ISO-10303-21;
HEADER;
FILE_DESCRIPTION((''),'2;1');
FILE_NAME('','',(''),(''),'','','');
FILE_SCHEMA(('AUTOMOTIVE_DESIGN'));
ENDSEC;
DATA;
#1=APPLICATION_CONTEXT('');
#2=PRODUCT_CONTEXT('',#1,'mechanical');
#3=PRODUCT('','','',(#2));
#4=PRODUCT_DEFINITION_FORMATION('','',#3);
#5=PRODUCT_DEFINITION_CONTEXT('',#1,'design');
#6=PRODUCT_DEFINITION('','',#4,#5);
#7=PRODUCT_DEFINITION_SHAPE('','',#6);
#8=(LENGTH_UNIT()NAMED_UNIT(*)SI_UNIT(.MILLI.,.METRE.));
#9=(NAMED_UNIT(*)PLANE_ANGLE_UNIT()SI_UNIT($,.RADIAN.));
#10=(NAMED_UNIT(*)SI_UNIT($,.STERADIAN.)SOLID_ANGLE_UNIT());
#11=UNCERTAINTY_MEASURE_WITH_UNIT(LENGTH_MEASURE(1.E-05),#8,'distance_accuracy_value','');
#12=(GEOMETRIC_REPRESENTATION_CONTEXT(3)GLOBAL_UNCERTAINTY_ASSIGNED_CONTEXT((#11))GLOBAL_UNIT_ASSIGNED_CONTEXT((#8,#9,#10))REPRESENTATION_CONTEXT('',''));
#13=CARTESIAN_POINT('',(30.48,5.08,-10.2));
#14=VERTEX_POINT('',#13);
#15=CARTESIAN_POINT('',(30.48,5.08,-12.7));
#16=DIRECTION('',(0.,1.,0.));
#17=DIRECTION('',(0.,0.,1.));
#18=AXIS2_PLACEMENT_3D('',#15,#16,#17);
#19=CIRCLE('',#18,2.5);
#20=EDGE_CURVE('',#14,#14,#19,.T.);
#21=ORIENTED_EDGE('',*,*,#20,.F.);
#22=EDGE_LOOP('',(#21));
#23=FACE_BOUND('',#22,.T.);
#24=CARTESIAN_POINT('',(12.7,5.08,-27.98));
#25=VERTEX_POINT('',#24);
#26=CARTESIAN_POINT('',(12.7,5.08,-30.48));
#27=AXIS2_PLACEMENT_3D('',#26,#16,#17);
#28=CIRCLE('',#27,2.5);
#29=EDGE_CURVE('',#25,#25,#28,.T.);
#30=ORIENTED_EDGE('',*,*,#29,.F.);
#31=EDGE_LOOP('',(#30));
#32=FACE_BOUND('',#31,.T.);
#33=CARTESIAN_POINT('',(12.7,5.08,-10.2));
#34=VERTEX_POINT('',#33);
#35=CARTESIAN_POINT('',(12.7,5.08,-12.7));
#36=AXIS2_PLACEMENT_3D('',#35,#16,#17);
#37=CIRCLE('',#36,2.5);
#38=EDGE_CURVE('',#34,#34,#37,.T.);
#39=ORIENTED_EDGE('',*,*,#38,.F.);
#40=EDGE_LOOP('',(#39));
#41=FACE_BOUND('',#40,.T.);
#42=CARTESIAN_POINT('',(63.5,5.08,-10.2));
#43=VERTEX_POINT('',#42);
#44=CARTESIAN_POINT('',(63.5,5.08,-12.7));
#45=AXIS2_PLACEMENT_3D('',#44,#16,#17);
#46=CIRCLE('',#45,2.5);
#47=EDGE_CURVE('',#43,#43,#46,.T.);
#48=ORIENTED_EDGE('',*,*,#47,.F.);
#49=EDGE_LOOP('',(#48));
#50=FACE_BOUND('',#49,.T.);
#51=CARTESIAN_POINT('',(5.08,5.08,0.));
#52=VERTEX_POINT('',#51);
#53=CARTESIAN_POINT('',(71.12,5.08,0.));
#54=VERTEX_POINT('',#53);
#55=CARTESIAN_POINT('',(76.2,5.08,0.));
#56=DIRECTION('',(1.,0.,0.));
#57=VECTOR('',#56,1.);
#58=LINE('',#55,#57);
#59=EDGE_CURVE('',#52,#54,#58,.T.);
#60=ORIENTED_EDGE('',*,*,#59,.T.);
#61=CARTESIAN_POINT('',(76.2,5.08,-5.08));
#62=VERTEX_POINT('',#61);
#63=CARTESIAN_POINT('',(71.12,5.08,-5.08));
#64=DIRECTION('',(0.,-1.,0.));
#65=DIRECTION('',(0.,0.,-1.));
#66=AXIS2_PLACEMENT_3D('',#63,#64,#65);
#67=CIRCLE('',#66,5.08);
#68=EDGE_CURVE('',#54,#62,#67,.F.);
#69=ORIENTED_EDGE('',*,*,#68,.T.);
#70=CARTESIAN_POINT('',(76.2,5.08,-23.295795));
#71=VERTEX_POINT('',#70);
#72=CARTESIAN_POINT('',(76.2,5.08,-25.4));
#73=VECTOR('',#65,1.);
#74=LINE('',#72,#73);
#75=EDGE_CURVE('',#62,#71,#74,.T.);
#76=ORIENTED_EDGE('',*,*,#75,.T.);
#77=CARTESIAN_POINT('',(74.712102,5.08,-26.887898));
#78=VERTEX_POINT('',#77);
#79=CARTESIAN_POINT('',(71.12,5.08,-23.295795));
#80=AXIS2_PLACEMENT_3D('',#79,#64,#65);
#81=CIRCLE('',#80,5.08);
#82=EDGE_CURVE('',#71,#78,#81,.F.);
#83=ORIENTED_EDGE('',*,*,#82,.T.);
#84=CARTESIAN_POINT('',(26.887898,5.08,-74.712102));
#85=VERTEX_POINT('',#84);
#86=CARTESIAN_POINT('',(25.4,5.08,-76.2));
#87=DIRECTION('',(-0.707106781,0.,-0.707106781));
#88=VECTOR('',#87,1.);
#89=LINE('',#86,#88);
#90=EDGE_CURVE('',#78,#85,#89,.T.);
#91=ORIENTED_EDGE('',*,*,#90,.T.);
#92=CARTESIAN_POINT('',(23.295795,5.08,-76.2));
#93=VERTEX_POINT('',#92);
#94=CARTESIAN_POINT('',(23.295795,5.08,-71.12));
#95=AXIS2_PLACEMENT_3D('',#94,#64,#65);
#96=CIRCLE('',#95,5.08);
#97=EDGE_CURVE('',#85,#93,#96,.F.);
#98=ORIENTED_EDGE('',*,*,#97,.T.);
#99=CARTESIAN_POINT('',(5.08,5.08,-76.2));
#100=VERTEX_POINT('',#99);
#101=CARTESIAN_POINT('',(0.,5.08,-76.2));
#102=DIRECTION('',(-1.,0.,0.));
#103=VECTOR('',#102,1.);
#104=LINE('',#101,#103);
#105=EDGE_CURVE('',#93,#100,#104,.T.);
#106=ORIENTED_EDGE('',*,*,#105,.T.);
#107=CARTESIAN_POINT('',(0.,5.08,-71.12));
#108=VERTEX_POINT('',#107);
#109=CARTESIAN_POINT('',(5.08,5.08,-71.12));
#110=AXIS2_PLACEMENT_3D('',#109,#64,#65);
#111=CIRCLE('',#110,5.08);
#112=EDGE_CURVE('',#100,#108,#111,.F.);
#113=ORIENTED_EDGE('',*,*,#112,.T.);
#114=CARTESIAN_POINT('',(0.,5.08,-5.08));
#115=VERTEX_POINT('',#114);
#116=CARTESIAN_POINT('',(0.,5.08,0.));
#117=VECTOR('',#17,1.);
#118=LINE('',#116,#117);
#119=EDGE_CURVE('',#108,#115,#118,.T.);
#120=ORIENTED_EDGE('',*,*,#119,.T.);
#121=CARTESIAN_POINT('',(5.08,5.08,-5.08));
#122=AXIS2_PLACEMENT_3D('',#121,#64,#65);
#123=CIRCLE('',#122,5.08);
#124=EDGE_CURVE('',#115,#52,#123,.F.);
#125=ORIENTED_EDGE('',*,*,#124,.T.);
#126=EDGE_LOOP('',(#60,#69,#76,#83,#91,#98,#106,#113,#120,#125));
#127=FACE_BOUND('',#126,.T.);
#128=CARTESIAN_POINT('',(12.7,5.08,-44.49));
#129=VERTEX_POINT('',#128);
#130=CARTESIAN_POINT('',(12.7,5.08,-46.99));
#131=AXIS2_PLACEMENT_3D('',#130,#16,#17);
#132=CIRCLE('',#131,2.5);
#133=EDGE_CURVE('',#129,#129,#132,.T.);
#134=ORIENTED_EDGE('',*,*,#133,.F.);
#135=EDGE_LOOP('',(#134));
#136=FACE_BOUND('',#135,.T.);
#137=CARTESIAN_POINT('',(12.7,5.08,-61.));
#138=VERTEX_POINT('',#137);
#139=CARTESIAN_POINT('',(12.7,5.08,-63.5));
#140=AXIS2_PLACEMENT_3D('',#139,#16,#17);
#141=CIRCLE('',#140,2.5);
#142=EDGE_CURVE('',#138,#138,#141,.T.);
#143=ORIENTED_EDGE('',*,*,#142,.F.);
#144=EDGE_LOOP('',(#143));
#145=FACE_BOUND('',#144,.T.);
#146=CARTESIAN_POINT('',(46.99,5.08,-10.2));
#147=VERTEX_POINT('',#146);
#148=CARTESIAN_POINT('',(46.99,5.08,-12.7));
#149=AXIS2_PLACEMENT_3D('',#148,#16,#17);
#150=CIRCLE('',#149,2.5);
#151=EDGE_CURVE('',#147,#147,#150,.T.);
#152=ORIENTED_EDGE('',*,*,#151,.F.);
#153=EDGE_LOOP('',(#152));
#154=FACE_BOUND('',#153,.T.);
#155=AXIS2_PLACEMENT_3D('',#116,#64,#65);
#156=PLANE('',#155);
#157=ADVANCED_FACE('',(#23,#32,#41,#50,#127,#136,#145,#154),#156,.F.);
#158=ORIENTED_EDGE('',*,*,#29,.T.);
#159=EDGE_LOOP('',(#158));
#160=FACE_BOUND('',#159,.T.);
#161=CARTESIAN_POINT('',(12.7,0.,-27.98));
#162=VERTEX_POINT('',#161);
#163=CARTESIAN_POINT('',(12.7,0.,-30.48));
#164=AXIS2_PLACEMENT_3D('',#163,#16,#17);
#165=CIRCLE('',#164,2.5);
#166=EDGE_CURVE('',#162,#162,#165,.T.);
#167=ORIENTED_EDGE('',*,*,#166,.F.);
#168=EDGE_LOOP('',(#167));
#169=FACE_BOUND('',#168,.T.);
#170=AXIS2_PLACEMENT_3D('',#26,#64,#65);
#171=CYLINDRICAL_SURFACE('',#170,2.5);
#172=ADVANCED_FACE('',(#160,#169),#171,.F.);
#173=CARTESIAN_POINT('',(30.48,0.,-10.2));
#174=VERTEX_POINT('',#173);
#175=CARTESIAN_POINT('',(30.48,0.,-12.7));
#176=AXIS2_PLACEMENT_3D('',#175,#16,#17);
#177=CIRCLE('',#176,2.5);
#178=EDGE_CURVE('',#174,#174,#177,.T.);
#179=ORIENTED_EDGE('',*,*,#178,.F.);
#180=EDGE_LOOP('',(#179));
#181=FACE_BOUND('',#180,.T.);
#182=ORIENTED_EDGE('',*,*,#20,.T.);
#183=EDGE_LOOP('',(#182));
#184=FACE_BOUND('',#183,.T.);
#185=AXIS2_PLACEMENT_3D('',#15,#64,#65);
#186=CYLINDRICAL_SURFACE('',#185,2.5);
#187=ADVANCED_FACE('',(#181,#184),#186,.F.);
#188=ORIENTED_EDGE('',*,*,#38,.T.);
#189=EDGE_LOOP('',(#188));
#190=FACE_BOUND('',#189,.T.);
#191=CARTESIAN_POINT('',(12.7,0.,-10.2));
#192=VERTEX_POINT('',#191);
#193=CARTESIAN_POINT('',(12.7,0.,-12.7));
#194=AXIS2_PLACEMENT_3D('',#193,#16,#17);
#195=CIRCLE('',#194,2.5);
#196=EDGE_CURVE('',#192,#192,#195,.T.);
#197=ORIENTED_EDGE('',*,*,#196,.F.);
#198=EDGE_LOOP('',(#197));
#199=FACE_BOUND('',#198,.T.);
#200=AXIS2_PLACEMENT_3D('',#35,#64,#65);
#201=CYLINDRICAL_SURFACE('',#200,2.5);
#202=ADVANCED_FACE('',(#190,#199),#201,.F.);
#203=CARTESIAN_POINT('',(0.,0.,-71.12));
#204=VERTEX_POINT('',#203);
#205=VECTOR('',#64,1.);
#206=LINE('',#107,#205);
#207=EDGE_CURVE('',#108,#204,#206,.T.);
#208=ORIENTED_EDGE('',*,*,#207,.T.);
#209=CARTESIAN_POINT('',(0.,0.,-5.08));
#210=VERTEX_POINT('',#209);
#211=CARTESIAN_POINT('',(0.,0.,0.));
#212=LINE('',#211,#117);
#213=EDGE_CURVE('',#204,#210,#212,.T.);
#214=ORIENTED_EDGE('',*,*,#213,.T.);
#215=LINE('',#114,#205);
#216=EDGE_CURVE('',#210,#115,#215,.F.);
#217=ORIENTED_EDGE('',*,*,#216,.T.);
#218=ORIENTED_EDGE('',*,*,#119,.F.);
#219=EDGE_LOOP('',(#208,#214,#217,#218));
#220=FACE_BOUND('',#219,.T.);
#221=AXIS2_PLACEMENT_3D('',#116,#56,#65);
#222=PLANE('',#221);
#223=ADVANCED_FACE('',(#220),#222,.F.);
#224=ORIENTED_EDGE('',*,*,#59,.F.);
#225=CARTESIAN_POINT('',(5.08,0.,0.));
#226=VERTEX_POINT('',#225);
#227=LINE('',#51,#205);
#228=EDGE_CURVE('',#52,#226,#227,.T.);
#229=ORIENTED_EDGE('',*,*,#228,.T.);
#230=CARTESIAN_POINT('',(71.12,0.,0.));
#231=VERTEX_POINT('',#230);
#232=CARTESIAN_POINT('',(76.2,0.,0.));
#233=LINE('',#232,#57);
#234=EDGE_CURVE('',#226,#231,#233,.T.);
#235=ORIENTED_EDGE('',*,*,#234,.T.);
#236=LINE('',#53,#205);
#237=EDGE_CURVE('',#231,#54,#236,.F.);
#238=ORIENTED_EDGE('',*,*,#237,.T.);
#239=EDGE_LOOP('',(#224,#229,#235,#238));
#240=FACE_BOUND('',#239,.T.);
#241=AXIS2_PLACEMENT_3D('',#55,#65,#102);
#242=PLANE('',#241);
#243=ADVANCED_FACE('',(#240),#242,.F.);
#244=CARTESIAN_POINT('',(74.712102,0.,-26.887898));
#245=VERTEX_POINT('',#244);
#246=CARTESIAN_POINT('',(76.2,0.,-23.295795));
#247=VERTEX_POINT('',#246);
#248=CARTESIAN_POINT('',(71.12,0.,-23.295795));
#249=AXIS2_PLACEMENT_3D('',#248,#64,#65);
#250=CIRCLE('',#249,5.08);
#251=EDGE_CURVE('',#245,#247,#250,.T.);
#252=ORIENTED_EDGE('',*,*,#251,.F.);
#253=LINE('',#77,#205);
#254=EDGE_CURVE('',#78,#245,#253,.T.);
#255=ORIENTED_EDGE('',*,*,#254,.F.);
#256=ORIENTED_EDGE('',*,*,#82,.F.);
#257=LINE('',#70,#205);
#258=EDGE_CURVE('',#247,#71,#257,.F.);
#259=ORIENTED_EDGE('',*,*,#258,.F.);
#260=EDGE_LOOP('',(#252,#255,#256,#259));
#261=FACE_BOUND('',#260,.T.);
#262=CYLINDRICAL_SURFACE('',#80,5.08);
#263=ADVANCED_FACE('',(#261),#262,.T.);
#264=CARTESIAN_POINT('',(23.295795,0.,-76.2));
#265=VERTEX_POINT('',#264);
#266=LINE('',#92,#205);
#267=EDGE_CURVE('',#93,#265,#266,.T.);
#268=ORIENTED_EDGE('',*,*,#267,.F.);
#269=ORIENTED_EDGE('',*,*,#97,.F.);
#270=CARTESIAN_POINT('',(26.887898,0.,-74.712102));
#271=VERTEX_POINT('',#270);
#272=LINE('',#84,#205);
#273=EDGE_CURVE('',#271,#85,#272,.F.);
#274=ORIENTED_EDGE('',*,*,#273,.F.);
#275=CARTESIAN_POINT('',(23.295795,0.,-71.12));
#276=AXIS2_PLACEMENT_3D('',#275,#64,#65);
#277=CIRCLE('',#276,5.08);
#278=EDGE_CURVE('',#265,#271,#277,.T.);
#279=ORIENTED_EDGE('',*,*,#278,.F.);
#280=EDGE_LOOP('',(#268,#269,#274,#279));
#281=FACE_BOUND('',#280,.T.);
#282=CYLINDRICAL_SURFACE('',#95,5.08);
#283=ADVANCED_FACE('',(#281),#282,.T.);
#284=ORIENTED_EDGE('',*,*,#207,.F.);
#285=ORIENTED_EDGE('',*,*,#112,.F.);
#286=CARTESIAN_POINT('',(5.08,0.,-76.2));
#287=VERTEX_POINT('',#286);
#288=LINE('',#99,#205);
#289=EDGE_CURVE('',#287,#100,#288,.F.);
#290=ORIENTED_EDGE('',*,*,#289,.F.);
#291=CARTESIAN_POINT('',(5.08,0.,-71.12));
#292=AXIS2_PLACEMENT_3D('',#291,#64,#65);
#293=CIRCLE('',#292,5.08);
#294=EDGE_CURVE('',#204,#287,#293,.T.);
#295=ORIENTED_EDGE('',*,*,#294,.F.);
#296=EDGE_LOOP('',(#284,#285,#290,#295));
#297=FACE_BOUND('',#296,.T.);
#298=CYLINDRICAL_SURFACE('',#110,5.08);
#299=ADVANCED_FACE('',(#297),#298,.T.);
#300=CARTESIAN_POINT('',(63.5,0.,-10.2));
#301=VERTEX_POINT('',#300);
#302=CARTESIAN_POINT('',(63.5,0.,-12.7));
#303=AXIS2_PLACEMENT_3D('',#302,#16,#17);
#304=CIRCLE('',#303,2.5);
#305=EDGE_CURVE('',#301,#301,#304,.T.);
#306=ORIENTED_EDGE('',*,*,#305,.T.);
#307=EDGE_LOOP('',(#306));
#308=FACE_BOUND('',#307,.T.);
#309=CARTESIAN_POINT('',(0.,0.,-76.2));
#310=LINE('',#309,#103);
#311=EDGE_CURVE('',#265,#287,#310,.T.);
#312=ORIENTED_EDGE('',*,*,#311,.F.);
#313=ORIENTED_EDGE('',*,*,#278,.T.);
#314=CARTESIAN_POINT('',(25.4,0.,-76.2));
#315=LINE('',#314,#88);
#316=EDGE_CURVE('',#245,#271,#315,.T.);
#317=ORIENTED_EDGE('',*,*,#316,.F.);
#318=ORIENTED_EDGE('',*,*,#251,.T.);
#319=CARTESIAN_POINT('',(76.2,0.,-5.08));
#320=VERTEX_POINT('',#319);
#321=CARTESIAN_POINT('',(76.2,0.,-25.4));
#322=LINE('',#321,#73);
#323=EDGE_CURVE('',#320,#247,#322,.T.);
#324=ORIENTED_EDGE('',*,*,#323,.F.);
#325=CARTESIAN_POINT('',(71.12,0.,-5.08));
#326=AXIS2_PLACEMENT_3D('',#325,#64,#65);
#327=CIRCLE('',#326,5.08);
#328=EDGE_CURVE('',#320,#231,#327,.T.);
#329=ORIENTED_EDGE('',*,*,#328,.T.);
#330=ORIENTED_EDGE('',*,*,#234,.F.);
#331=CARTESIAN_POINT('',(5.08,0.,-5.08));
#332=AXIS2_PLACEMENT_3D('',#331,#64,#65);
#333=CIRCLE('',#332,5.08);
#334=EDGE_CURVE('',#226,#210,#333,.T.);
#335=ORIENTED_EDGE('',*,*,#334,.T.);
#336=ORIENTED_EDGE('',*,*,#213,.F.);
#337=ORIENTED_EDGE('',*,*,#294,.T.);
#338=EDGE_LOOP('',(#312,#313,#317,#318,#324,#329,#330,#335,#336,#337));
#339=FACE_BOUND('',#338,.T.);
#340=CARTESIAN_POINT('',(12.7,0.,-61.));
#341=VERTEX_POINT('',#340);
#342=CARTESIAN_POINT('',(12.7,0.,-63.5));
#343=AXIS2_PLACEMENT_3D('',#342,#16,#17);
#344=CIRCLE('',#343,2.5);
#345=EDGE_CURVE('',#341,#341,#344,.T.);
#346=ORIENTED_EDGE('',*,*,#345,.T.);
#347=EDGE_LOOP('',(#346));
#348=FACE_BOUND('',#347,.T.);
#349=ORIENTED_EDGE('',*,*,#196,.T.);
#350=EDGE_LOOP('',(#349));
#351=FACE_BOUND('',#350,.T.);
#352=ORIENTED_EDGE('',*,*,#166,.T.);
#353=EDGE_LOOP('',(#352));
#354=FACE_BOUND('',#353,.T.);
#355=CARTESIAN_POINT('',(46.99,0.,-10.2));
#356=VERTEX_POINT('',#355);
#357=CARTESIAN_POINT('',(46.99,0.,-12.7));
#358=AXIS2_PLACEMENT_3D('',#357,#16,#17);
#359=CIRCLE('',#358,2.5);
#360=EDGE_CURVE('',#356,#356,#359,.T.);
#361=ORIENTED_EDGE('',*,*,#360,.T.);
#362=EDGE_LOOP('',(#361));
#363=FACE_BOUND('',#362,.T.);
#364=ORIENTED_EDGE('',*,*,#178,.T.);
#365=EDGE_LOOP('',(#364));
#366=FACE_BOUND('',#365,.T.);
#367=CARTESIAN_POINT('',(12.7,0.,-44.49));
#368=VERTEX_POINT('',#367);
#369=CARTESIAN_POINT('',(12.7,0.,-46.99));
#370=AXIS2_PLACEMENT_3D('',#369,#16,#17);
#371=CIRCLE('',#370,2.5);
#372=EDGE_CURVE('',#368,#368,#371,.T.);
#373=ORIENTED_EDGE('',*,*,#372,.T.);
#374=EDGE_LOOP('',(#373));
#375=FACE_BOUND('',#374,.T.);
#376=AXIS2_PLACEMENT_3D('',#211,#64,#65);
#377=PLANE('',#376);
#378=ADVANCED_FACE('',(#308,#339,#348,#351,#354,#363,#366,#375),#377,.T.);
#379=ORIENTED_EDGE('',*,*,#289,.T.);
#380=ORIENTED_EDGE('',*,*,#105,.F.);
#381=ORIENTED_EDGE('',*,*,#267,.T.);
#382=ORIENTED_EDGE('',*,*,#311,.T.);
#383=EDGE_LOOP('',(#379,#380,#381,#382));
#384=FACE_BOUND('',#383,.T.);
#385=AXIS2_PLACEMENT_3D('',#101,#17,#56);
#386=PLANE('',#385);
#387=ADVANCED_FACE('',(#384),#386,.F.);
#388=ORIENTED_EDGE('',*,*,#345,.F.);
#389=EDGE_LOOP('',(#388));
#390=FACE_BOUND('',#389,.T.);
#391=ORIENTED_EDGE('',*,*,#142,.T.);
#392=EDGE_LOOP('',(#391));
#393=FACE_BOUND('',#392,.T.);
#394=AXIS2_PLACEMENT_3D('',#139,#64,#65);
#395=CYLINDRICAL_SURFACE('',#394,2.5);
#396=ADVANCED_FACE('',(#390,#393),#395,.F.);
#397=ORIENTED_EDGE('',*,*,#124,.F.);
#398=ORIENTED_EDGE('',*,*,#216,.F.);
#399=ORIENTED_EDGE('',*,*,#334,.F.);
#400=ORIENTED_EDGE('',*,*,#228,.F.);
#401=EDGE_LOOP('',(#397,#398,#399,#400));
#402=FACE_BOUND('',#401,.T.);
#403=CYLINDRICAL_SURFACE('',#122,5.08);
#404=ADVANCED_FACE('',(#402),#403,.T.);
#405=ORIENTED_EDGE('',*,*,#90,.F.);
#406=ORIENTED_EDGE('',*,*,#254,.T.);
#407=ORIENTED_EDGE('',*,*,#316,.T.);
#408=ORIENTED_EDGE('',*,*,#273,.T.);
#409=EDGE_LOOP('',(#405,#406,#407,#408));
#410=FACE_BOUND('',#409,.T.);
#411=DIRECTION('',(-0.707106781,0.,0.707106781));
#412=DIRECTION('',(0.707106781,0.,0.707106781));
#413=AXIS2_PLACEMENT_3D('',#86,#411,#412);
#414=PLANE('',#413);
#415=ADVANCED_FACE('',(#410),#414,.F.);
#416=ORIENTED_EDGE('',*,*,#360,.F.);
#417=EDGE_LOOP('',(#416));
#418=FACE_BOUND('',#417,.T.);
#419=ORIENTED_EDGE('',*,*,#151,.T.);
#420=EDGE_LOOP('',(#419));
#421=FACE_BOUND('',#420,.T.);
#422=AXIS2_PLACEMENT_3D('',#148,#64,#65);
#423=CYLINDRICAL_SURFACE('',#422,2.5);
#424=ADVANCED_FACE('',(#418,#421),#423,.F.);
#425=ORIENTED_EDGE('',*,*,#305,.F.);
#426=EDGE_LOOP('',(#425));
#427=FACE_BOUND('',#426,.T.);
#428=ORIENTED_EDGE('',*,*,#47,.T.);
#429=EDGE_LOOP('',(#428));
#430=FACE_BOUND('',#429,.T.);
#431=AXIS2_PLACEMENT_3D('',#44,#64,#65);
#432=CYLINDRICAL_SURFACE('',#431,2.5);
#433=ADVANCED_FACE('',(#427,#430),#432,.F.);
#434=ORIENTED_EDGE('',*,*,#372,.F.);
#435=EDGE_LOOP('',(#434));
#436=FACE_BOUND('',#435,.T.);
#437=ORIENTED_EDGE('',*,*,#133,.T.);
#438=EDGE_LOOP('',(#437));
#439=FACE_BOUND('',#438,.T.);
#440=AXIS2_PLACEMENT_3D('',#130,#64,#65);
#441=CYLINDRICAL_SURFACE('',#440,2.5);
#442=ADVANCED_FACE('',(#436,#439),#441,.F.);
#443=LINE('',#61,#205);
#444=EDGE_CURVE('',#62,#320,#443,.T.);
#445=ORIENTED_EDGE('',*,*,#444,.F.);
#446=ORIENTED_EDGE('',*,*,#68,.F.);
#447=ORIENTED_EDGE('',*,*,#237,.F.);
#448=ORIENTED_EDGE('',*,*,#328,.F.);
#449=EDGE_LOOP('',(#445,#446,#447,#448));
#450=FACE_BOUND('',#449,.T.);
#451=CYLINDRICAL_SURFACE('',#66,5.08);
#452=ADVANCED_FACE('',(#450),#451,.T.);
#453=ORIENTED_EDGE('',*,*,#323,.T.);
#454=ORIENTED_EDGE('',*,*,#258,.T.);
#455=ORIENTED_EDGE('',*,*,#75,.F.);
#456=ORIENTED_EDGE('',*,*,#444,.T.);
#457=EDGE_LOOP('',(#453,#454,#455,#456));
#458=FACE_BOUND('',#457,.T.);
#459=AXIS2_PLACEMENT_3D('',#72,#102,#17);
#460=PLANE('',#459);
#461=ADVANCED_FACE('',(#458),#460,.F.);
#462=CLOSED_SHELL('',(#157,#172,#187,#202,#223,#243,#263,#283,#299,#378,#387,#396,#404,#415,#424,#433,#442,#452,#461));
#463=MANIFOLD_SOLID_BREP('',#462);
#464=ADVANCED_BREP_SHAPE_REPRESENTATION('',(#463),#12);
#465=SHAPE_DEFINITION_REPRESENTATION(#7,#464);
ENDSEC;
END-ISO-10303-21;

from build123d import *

# Parameters (mm, degrees)
SKETCH1_R           = 2.5
BOSS_EXTRUDE1_DEPTH = 5.08
FILLET1_R           = 5.08
FILLET2_R           = 5.08


with BuildPart() as part:
    # Sketch1 → Boss-Extrude1 (new body)
    with BuildSketch(Plane(origin=(0, 0, 0), x_dir=(1, 0, 0), z_dir=(0, 1, 0))):
        Polygon((0, 0), (0, 76.2), (25.4, 76.2), (76.2, 25.4), (76.2, 0), align=None)
        with Locations((12.7, 63.5)):
            Circle(SKETCH1_R, mode=Mode.SUBTRACT)
        with Locations((63.5, 12.7)):
            Circle(SKETCH1_R, mode=Mode.SUBTRACT)
        with Locations((12.7, 46.99)):
            Circle(SKETCH1_R, mode=Mode.SUBTRACT)
        with Locations((12.7, 30.48)):
            Circle(SKETCH1_R, mode=Mode.SUBTRACT)
        with Locations((46.99, 12.7)):
            Circle(SKETCH1_R, mode=Mode.SUBTRACT)
        with Locations((30.48, 12.7)):
            Circle(SKETCH1_R, mode=Mode.SUBTRACT)
        with Locations((12.7, 12.7)):
            Circle(SKETCH1_R, mode=Mode.SUBTRACT)
    extrude(amount=BOSS_EXTRUDE1_DEPTH)

    # Fillet1
    fillet1_edges = [part.edges().sort_by_distance(p)[0] for p in [
        (0, 2.54, 0),
    ]]
    fillet(fillet1_edges, radius=FILLET1_R)

    # Fillet2
    fillet2_edges = [part.edges().sort_by_distance(p)[0] for p in [
        (25.4, 2.54, -76.2),
        (0, 2.54, -76.2),
        (76.2, 2.54, 0),
        (76.2, 2.54, -25.4),
    ]]
    fillet(fillet2_edges, radius=FILLET2_R)


solid = part.part
